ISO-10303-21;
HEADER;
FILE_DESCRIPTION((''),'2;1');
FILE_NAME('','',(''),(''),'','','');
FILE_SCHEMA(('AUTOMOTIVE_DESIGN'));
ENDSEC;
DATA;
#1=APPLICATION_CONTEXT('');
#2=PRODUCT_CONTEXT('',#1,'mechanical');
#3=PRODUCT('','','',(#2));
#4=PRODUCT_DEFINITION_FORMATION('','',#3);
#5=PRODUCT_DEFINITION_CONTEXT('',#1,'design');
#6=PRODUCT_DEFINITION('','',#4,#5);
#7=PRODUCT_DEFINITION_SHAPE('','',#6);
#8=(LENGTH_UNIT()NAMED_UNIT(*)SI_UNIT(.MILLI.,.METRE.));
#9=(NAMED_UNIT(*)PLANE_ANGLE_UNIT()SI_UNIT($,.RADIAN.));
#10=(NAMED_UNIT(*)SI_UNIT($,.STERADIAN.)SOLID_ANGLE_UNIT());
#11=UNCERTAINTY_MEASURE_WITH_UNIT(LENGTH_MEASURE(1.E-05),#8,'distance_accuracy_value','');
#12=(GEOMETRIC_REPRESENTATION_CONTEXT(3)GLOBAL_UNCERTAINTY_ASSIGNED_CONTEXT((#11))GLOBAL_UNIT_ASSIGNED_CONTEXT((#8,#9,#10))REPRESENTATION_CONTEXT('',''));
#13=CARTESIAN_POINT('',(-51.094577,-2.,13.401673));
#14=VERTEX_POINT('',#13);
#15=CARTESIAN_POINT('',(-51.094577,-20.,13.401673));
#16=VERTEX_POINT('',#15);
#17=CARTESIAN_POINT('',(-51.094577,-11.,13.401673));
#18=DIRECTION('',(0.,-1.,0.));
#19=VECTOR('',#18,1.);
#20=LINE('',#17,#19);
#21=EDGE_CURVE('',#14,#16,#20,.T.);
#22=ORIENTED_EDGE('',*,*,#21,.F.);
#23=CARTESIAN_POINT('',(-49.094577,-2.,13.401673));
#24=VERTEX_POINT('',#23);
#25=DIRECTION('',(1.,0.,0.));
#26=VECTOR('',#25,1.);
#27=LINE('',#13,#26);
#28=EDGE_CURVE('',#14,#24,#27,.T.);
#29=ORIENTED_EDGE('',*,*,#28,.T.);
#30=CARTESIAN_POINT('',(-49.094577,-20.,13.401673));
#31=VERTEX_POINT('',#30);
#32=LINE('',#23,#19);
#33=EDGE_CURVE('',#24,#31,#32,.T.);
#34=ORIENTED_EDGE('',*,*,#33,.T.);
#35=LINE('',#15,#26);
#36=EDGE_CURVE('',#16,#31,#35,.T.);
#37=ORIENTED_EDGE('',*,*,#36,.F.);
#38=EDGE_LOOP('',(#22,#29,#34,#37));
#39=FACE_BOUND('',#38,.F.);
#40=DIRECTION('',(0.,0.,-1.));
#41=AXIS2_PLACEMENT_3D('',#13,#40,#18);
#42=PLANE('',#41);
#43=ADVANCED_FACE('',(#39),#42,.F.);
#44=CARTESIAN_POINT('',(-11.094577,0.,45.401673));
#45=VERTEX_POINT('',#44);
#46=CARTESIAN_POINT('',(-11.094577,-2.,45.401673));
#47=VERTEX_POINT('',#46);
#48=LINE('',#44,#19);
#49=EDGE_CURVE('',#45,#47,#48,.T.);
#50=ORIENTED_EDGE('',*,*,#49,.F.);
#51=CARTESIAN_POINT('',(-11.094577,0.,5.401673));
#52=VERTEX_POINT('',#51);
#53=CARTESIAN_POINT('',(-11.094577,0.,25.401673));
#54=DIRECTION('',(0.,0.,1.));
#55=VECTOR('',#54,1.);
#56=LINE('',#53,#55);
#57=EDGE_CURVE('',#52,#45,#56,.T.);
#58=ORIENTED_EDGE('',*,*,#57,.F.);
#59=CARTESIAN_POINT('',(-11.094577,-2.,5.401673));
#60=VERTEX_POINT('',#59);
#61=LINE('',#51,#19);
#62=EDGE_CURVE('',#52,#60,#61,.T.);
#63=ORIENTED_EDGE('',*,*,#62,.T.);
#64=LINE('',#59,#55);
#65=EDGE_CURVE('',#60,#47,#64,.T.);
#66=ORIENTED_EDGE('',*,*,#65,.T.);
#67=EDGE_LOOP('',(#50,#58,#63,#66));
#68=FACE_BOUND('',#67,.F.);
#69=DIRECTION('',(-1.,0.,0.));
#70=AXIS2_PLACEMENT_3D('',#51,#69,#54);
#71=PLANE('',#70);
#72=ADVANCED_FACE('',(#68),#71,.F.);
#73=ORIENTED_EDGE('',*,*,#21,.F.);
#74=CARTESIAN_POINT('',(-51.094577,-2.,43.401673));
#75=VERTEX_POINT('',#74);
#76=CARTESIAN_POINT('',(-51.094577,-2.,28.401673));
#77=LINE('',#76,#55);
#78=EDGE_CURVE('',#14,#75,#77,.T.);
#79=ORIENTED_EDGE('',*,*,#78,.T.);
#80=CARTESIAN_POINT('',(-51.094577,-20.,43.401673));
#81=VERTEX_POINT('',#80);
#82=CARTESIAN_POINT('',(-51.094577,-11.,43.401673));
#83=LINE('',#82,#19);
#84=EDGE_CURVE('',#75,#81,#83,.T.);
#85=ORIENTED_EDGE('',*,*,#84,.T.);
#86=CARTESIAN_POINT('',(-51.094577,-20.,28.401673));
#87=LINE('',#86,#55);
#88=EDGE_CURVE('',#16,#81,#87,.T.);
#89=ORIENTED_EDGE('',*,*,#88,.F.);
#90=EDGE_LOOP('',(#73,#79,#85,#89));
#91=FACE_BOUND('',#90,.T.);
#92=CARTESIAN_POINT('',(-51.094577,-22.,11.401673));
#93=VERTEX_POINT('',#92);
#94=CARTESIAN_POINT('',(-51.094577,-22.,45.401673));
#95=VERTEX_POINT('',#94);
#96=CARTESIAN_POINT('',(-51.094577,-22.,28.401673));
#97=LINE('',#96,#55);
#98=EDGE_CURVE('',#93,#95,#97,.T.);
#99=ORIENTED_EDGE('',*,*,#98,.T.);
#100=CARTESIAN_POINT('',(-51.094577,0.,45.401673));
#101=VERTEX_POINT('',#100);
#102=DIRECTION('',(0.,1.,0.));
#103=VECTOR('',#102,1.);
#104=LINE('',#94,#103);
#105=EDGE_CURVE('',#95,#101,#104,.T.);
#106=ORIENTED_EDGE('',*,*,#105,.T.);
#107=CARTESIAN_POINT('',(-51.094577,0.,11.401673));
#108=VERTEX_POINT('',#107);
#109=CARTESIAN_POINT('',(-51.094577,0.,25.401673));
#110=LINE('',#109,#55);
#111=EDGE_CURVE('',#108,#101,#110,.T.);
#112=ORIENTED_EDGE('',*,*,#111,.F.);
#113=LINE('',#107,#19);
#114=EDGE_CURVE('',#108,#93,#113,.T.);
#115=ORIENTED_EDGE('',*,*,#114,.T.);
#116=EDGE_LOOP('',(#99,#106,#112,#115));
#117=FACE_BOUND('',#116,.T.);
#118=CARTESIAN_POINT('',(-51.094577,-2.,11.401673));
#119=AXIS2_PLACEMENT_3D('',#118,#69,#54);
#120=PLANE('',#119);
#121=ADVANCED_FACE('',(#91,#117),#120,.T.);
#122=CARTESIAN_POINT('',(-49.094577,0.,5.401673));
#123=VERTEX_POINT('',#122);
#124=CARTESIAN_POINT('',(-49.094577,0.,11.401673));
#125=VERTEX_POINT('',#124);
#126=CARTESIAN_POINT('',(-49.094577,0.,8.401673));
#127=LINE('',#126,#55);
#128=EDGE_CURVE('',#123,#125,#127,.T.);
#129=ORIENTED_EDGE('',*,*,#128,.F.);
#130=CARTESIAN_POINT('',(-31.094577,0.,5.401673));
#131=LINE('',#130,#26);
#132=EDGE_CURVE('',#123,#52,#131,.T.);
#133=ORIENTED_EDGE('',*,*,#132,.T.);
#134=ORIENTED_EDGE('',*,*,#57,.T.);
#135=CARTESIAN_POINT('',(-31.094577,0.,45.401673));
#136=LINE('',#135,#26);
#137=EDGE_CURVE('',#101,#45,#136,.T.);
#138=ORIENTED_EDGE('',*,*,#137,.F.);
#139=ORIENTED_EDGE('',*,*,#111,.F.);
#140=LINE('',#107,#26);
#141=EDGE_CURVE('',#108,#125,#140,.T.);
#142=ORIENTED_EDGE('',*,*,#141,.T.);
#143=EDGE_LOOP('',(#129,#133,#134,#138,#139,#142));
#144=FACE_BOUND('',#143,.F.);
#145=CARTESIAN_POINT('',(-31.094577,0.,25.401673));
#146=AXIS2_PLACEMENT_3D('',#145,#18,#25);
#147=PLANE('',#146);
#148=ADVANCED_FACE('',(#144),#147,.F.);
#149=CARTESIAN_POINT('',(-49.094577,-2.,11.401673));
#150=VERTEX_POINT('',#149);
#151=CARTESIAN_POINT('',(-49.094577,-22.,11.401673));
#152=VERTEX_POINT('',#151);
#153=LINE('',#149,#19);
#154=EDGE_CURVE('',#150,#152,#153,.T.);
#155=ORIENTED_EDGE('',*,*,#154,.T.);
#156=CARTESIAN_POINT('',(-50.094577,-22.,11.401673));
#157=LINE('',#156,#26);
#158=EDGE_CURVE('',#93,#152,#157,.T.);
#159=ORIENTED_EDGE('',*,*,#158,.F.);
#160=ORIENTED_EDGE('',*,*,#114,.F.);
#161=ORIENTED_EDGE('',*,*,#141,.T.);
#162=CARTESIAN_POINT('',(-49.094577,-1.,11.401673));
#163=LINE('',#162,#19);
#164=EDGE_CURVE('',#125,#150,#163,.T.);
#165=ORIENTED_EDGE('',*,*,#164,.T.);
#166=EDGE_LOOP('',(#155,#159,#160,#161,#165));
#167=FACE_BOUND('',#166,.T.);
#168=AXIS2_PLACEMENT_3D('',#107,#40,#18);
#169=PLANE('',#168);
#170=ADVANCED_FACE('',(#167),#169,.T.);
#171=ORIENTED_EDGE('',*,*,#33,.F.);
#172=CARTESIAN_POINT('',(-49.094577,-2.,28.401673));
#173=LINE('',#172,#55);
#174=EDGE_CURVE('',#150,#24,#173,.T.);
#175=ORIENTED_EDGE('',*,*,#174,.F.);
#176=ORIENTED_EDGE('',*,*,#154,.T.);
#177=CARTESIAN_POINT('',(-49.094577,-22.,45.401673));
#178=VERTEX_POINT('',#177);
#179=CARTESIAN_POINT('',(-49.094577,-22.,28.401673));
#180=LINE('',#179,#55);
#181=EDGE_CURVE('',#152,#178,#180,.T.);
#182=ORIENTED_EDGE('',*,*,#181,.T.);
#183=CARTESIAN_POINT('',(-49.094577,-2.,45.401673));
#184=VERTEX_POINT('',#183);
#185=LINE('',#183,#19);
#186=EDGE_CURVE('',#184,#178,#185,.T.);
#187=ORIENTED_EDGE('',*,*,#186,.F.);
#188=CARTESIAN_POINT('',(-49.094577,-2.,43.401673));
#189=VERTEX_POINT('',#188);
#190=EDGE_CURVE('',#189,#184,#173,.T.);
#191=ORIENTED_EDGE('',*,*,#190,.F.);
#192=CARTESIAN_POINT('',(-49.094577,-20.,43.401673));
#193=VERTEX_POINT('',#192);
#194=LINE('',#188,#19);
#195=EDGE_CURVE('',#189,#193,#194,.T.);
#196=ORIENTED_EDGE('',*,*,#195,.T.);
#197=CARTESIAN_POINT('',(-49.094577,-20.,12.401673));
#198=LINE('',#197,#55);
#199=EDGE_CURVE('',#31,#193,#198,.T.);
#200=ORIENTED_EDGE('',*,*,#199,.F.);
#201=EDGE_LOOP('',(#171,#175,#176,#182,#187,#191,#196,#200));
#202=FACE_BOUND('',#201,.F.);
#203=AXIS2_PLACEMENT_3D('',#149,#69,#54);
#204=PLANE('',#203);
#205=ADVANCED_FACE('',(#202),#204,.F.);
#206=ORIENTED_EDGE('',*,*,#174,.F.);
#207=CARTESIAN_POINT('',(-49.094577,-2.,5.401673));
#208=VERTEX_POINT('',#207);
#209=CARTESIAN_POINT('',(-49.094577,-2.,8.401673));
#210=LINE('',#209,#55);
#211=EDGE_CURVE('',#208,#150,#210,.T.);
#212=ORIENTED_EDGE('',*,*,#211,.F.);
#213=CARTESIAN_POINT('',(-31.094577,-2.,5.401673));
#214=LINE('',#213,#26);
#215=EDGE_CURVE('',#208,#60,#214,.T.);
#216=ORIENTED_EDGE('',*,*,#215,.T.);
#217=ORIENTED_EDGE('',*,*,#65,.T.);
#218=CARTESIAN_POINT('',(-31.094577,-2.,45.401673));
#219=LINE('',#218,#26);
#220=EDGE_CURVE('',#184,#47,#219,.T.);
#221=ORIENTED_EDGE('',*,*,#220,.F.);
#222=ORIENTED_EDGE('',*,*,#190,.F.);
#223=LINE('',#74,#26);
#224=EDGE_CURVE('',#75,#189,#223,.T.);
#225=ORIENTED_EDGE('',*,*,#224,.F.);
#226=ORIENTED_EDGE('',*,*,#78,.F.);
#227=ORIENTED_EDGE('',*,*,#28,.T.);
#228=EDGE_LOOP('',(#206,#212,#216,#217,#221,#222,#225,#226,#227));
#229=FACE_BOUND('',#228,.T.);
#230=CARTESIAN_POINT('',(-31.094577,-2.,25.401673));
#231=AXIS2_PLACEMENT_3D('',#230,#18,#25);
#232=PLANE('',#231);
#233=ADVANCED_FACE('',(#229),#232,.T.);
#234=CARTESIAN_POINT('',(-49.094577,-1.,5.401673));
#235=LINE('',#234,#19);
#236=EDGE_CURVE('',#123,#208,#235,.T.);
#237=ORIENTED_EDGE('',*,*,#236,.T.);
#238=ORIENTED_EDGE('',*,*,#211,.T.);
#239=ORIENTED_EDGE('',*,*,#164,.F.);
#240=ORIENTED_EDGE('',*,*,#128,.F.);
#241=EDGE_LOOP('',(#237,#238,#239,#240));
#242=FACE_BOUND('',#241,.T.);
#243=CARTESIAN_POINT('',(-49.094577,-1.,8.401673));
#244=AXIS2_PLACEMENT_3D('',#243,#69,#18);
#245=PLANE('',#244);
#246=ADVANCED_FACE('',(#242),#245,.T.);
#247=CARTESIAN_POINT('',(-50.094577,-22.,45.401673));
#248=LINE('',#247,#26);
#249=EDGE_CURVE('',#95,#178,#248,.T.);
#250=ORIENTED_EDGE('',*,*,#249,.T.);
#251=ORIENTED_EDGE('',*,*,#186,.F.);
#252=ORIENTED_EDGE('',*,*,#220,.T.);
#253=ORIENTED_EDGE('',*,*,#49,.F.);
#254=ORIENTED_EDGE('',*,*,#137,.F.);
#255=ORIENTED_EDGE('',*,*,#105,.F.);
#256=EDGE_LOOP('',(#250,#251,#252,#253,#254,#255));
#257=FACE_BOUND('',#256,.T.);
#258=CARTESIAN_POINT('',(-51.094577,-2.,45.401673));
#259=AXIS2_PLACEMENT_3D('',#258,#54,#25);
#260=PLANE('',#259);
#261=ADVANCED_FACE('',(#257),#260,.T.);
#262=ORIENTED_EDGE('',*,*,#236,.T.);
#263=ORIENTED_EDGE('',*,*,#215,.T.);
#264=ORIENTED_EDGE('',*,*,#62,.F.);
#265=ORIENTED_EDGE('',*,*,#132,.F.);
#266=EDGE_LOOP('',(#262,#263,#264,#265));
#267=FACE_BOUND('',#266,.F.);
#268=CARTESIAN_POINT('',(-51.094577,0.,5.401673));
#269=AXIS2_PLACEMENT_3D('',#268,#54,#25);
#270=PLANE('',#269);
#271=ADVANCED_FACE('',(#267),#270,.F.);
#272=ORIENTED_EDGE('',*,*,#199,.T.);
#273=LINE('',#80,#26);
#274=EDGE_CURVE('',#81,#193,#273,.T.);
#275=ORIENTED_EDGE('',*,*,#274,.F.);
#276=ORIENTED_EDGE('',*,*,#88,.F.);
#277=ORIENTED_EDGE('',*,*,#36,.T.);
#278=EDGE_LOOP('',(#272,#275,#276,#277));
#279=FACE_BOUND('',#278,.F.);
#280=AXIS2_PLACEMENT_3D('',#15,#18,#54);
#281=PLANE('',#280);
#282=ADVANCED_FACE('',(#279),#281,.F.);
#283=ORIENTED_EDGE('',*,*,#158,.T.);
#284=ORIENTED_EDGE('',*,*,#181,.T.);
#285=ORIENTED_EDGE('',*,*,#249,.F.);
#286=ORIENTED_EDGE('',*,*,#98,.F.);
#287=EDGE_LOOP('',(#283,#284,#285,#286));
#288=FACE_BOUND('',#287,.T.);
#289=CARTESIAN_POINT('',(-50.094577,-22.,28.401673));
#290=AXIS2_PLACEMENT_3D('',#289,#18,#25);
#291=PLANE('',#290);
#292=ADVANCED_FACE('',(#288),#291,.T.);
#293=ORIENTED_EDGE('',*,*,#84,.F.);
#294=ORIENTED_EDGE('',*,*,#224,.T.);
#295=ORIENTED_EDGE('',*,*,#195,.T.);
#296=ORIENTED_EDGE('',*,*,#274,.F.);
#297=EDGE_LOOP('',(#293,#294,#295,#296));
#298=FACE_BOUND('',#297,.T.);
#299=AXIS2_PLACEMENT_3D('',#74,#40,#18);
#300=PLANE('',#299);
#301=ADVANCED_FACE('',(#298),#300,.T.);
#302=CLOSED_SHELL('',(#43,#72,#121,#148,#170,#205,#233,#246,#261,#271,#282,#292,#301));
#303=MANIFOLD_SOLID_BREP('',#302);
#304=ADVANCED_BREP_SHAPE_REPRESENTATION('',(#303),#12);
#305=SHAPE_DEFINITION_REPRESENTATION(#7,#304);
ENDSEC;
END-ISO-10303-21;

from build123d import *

# Parameters (mm, degrees)
F0_W     = 40
F0_H     = 40
F1_DEPTH = 2
F2_W     = 2
F2_H     = 34
F3_DEPTH = 20
F4_W     = 18
F4_H     = 30
F5_DEPTH = 40.001
F6_W     = 2
F6_H     = 6
F7_DEPTH = 2


# Not quite as in the source:
# - the program builds the solid bodies; features that only make, move or delete a surface that nothing else refers to are left out


with BuildPart() as f1:
    # F0 (on Front) → F1 (new body)
    with BuildSketch(Plane.XZ):
        with Locations((-31.0945767164, 25.4016729393)):
            Rectangle(F0_W, F0_H)
    extrude(amount=F1_DEPTH)

    # F2 (on face) → F3 (join)
    with BuildSketch(Plane.XZ.offset(2)):
        with Locations((-50.0945767164, 28.4016729393)):
            Rectangle(F2_W, F2_H)
    extrude(amount=F3_DEPTH)

    # F4 (on face) → F5 (cut, through all)
    with BuildSketch(Plane(origin=(-51.0945767164, 0, 0), x_dir=(0, -1, 0), z_dir=(-1, 0, 0))):
        with Locations((11, 28.4016729393)):
            Rectangle(F4_W, F4_H)
    extrude(amount=-F5_DEPTH, mode=Mode.SUBTRACT)

    # F6 (on face) → F7 (cut)
    with BuildSketch(Plane(origin=(-51.0945767164, 0, 0), x_dir=(0, -1, 0), z_dir=(-1, 0, 0))):
        with Locations((1, 8.4016729393)):
            Rectangle(F6_W, F6_H)
    extrude(amount=-F7_DEPTH, mode=Mode.SUBTRACT)


solid = f1.part
